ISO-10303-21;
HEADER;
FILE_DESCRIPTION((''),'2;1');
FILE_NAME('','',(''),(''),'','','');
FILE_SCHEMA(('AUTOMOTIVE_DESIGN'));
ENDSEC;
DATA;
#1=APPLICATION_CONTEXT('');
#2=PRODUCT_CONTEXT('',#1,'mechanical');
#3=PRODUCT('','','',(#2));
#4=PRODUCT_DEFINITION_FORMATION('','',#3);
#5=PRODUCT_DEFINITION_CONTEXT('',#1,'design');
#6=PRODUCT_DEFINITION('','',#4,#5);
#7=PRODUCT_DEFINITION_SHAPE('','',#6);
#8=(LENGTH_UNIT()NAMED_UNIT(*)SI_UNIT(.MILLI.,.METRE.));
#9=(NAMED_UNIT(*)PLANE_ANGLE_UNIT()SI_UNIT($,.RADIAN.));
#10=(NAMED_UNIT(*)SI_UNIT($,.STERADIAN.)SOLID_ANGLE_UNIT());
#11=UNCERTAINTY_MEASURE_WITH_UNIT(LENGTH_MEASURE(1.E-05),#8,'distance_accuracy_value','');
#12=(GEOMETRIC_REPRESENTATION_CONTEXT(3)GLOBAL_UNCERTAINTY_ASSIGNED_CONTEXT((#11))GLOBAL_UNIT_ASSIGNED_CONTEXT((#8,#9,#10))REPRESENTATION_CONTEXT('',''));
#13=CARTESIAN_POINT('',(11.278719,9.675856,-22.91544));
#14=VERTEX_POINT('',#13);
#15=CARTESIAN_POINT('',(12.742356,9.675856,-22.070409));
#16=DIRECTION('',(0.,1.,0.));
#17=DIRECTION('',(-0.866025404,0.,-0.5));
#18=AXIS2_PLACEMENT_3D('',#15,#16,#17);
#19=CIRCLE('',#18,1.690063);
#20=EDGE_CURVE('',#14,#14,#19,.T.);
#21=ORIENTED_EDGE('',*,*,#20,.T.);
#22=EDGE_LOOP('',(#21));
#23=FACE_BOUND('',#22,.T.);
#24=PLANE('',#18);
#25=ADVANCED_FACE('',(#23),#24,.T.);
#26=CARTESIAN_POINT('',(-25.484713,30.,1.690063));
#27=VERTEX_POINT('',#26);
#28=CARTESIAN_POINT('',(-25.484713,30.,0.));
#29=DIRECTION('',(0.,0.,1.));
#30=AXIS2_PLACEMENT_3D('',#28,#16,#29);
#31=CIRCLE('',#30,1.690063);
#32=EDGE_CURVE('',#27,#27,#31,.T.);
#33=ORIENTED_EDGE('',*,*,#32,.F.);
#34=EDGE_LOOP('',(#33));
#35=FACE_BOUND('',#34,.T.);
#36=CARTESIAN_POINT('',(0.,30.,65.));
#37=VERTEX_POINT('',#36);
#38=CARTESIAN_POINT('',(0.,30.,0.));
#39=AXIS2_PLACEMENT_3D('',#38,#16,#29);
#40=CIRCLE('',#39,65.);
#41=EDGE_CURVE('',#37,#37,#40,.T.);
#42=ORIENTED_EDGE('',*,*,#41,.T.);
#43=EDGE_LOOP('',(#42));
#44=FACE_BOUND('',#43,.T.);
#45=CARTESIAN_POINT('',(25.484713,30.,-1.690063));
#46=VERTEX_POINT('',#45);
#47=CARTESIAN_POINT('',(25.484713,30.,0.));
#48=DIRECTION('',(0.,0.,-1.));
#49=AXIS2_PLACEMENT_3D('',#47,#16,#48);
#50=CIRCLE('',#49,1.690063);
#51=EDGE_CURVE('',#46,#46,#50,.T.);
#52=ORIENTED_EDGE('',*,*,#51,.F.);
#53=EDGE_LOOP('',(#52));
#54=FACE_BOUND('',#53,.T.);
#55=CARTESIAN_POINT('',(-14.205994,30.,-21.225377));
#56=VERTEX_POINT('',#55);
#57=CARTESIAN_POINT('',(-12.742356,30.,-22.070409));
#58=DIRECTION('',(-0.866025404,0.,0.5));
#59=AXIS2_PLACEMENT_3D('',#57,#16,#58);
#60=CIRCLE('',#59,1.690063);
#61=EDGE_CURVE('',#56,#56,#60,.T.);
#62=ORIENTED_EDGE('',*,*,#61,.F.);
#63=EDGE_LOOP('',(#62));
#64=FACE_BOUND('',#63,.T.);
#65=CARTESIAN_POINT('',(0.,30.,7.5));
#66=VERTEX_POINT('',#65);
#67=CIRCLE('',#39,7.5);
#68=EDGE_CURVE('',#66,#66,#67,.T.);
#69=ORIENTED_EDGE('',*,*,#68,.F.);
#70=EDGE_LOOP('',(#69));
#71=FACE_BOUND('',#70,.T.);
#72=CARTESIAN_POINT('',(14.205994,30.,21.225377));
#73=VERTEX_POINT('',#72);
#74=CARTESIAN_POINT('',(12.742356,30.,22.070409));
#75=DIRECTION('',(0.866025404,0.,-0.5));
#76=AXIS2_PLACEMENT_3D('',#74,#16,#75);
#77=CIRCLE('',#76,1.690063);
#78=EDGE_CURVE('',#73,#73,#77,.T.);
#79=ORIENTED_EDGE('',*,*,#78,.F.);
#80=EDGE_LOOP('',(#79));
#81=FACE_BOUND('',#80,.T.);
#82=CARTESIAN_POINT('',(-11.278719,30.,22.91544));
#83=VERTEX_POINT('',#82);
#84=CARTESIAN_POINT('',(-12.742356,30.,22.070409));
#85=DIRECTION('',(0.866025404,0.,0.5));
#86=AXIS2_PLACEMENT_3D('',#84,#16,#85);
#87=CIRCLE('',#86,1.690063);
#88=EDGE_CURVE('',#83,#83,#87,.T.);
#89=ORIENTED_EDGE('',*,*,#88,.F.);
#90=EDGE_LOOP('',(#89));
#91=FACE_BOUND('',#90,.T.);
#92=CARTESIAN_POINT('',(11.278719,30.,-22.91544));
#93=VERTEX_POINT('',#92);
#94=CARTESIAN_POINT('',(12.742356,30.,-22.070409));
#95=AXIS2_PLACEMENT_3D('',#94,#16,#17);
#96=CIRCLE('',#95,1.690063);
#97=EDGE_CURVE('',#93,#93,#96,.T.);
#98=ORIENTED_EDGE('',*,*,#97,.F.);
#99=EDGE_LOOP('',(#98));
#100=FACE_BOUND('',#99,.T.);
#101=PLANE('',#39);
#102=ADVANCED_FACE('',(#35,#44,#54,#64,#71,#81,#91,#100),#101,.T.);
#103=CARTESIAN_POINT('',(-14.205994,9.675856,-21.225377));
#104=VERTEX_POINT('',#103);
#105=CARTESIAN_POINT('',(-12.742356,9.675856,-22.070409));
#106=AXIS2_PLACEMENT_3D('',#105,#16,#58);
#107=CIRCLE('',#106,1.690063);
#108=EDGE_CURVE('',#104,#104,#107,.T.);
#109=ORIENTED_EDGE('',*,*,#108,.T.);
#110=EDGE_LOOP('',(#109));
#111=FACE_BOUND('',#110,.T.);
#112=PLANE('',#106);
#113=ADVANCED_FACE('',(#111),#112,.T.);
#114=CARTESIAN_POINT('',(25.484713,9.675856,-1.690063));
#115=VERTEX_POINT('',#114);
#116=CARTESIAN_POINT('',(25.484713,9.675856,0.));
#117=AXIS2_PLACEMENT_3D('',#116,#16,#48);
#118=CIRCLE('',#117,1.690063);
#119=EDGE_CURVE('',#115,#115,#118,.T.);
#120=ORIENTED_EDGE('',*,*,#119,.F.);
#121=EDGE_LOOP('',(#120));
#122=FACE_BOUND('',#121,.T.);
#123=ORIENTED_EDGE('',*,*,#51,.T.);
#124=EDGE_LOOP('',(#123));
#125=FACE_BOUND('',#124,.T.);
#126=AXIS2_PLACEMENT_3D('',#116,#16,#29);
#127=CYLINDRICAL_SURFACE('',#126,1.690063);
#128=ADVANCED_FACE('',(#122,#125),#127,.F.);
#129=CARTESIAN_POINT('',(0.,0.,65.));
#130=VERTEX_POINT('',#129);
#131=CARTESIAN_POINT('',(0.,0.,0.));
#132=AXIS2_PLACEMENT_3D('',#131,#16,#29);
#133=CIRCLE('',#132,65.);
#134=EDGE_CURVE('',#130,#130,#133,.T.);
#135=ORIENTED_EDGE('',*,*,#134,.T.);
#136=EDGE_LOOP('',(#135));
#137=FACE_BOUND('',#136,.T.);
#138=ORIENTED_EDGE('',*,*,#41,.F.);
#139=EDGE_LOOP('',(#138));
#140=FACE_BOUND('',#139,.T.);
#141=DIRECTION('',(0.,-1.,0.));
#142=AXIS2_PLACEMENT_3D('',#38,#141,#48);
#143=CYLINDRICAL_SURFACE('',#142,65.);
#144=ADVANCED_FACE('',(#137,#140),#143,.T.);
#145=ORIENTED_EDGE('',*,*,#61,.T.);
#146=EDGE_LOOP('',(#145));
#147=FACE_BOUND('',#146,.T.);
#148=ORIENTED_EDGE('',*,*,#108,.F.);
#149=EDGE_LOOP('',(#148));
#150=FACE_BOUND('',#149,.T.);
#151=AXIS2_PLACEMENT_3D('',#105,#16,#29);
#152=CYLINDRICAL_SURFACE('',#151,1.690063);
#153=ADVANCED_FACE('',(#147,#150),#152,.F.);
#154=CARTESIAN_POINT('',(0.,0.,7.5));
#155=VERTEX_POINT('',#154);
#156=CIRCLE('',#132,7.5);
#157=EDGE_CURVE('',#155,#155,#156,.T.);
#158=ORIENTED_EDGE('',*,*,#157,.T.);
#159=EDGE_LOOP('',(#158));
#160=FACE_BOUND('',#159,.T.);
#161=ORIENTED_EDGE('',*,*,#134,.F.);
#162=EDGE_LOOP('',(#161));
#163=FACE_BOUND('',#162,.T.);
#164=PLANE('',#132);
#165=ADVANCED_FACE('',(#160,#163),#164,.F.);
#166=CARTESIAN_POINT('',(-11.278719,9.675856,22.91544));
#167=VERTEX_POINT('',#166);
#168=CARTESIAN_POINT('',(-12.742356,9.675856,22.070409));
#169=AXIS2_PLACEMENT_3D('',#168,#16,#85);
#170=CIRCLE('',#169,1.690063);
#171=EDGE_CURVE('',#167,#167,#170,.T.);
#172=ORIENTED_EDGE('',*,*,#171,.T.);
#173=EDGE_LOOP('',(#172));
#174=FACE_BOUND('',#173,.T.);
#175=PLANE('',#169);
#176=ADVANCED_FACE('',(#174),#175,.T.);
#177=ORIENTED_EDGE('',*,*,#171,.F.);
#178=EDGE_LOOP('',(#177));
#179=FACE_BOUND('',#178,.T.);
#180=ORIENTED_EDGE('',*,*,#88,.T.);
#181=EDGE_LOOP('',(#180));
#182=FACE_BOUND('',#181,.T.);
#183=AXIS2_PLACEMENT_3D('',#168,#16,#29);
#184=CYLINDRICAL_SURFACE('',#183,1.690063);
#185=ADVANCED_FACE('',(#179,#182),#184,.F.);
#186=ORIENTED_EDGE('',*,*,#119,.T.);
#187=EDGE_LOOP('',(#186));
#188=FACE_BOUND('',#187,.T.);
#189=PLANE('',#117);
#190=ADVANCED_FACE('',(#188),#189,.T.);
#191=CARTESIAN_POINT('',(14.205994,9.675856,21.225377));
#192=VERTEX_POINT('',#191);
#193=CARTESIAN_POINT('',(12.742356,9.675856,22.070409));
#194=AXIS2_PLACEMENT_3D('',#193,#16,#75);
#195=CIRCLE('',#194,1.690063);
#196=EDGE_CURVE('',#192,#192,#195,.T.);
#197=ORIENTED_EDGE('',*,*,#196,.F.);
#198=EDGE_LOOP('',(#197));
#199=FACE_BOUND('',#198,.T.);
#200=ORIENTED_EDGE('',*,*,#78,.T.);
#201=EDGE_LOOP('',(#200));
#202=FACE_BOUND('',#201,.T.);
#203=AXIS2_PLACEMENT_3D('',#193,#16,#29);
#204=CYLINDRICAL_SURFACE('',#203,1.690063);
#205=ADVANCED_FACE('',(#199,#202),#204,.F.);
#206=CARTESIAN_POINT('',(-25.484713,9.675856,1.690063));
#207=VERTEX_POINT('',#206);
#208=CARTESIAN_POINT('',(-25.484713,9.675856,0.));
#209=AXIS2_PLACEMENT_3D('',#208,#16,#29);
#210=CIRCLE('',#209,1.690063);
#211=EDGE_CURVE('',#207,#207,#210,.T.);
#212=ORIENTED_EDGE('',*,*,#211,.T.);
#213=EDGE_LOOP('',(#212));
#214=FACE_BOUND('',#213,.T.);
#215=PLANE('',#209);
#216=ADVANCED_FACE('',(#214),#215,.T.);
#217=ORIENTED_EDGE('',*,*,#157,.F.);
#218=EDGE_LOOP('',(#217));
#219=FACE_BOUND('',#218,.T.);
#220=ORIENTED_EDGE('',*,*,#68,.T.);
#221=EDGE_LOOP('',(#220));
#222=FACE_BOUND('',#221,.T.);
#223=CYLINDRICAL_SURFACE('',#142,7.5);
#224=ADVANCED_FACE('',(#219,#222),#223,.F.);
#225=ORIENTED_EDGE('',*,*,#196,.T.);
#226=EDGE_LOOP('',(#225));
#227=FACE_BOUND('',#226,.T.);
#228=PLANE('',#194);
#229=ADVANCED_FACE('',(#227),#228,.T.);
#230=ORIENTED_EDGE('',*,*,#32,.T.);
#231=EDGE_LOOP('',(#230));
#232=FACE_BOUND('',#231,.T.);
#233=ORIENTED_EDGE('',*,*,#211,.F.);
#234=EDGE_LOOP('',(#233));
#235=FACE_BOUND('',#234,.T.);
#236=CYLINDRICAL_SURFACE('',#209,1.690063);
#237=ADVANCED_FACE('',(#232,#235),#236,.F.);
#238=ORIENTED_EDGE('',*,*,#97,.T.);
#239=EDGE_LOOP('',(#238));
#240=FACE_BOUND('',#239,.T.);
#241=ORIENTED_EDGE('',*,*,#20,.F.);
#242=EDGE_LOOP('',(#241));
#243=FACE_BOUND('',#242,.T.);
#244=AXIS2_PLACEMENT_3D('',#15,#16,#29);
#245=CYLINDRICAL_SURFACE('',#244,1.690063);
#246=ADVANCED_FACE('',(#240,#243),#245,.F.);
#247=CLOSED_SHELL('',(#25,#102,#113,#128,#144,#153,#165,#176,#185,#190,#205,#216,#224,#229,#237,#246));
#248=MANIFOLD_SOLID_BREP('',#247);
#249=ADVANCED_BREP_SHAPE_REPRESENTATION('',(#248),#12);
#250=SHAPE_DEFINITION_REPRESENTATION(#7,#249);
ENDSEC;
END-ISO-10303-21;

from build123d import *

# Parameters (mm, degrees)
SKETCH1_R           = 65
BOSS_EXTRUDE1_DEPTH = 30
SKETCH2_R           = 7.5
CUT_EXTRUDE1_DEPTH  = 97.695398029
SKETCH3_R           = 1.690063263
CUT_EXTRUDE2_DEPTH  = 20.324144327
CIRPATTERN1_COUNT   = 6


with BuildPart() as part:
    # Sketch1 → Boss-Extrude1 (new body)
    with BuildSketch(Plane(origin=(0, 0, 0), x_dir=(1, 0, 0), z_dir=(0, 1, 0))):
        Circle(SKETCH1_R)
    extrude(amount=BOSS_EXTRUDE1_DEPTH)

    # Sketch2 → Cut-Extrude1 (cut, through all)
    with BuildSketch(Plane(origin=(0, 0, 0), x_dir=(1, 0, 0), z_dir=(0, 1, 0))):
        Circle(SKETCH2_R)
    extrude(amount=CUT_EXTRUDE1_DEPTH, mode=Mode.SUBTRACT)

    # Sketch3 → Cut-Extrude2 (cut)
    with BuildSketch(Plane(origin=(0, 30, 0), x_dir=(1, 0, 0), z_dir=(0, 1, 0))):
        with Locations((-25.484712712, 0)):
            Circle(SKETCH3_R)
    cut_extrude2 = extrude(amount=-CUT_EXTRUDE2_DEPTH, mode=Mode.SUBTRACT)

    # CirPattern1: Cut-Extrude2 ×6 about axis
    cirpattern1_axis = Axis((0, 0, 0), (0, 1, 0))
    for i in range(1, CIRPATTERN1_COUNT):
        add(cut_extrude2.rotate(cirpattern1_axis, i * 360 / CIRPATTERN1_COUNT), mode=Mode.SUBTRACT)


solid = part.part
